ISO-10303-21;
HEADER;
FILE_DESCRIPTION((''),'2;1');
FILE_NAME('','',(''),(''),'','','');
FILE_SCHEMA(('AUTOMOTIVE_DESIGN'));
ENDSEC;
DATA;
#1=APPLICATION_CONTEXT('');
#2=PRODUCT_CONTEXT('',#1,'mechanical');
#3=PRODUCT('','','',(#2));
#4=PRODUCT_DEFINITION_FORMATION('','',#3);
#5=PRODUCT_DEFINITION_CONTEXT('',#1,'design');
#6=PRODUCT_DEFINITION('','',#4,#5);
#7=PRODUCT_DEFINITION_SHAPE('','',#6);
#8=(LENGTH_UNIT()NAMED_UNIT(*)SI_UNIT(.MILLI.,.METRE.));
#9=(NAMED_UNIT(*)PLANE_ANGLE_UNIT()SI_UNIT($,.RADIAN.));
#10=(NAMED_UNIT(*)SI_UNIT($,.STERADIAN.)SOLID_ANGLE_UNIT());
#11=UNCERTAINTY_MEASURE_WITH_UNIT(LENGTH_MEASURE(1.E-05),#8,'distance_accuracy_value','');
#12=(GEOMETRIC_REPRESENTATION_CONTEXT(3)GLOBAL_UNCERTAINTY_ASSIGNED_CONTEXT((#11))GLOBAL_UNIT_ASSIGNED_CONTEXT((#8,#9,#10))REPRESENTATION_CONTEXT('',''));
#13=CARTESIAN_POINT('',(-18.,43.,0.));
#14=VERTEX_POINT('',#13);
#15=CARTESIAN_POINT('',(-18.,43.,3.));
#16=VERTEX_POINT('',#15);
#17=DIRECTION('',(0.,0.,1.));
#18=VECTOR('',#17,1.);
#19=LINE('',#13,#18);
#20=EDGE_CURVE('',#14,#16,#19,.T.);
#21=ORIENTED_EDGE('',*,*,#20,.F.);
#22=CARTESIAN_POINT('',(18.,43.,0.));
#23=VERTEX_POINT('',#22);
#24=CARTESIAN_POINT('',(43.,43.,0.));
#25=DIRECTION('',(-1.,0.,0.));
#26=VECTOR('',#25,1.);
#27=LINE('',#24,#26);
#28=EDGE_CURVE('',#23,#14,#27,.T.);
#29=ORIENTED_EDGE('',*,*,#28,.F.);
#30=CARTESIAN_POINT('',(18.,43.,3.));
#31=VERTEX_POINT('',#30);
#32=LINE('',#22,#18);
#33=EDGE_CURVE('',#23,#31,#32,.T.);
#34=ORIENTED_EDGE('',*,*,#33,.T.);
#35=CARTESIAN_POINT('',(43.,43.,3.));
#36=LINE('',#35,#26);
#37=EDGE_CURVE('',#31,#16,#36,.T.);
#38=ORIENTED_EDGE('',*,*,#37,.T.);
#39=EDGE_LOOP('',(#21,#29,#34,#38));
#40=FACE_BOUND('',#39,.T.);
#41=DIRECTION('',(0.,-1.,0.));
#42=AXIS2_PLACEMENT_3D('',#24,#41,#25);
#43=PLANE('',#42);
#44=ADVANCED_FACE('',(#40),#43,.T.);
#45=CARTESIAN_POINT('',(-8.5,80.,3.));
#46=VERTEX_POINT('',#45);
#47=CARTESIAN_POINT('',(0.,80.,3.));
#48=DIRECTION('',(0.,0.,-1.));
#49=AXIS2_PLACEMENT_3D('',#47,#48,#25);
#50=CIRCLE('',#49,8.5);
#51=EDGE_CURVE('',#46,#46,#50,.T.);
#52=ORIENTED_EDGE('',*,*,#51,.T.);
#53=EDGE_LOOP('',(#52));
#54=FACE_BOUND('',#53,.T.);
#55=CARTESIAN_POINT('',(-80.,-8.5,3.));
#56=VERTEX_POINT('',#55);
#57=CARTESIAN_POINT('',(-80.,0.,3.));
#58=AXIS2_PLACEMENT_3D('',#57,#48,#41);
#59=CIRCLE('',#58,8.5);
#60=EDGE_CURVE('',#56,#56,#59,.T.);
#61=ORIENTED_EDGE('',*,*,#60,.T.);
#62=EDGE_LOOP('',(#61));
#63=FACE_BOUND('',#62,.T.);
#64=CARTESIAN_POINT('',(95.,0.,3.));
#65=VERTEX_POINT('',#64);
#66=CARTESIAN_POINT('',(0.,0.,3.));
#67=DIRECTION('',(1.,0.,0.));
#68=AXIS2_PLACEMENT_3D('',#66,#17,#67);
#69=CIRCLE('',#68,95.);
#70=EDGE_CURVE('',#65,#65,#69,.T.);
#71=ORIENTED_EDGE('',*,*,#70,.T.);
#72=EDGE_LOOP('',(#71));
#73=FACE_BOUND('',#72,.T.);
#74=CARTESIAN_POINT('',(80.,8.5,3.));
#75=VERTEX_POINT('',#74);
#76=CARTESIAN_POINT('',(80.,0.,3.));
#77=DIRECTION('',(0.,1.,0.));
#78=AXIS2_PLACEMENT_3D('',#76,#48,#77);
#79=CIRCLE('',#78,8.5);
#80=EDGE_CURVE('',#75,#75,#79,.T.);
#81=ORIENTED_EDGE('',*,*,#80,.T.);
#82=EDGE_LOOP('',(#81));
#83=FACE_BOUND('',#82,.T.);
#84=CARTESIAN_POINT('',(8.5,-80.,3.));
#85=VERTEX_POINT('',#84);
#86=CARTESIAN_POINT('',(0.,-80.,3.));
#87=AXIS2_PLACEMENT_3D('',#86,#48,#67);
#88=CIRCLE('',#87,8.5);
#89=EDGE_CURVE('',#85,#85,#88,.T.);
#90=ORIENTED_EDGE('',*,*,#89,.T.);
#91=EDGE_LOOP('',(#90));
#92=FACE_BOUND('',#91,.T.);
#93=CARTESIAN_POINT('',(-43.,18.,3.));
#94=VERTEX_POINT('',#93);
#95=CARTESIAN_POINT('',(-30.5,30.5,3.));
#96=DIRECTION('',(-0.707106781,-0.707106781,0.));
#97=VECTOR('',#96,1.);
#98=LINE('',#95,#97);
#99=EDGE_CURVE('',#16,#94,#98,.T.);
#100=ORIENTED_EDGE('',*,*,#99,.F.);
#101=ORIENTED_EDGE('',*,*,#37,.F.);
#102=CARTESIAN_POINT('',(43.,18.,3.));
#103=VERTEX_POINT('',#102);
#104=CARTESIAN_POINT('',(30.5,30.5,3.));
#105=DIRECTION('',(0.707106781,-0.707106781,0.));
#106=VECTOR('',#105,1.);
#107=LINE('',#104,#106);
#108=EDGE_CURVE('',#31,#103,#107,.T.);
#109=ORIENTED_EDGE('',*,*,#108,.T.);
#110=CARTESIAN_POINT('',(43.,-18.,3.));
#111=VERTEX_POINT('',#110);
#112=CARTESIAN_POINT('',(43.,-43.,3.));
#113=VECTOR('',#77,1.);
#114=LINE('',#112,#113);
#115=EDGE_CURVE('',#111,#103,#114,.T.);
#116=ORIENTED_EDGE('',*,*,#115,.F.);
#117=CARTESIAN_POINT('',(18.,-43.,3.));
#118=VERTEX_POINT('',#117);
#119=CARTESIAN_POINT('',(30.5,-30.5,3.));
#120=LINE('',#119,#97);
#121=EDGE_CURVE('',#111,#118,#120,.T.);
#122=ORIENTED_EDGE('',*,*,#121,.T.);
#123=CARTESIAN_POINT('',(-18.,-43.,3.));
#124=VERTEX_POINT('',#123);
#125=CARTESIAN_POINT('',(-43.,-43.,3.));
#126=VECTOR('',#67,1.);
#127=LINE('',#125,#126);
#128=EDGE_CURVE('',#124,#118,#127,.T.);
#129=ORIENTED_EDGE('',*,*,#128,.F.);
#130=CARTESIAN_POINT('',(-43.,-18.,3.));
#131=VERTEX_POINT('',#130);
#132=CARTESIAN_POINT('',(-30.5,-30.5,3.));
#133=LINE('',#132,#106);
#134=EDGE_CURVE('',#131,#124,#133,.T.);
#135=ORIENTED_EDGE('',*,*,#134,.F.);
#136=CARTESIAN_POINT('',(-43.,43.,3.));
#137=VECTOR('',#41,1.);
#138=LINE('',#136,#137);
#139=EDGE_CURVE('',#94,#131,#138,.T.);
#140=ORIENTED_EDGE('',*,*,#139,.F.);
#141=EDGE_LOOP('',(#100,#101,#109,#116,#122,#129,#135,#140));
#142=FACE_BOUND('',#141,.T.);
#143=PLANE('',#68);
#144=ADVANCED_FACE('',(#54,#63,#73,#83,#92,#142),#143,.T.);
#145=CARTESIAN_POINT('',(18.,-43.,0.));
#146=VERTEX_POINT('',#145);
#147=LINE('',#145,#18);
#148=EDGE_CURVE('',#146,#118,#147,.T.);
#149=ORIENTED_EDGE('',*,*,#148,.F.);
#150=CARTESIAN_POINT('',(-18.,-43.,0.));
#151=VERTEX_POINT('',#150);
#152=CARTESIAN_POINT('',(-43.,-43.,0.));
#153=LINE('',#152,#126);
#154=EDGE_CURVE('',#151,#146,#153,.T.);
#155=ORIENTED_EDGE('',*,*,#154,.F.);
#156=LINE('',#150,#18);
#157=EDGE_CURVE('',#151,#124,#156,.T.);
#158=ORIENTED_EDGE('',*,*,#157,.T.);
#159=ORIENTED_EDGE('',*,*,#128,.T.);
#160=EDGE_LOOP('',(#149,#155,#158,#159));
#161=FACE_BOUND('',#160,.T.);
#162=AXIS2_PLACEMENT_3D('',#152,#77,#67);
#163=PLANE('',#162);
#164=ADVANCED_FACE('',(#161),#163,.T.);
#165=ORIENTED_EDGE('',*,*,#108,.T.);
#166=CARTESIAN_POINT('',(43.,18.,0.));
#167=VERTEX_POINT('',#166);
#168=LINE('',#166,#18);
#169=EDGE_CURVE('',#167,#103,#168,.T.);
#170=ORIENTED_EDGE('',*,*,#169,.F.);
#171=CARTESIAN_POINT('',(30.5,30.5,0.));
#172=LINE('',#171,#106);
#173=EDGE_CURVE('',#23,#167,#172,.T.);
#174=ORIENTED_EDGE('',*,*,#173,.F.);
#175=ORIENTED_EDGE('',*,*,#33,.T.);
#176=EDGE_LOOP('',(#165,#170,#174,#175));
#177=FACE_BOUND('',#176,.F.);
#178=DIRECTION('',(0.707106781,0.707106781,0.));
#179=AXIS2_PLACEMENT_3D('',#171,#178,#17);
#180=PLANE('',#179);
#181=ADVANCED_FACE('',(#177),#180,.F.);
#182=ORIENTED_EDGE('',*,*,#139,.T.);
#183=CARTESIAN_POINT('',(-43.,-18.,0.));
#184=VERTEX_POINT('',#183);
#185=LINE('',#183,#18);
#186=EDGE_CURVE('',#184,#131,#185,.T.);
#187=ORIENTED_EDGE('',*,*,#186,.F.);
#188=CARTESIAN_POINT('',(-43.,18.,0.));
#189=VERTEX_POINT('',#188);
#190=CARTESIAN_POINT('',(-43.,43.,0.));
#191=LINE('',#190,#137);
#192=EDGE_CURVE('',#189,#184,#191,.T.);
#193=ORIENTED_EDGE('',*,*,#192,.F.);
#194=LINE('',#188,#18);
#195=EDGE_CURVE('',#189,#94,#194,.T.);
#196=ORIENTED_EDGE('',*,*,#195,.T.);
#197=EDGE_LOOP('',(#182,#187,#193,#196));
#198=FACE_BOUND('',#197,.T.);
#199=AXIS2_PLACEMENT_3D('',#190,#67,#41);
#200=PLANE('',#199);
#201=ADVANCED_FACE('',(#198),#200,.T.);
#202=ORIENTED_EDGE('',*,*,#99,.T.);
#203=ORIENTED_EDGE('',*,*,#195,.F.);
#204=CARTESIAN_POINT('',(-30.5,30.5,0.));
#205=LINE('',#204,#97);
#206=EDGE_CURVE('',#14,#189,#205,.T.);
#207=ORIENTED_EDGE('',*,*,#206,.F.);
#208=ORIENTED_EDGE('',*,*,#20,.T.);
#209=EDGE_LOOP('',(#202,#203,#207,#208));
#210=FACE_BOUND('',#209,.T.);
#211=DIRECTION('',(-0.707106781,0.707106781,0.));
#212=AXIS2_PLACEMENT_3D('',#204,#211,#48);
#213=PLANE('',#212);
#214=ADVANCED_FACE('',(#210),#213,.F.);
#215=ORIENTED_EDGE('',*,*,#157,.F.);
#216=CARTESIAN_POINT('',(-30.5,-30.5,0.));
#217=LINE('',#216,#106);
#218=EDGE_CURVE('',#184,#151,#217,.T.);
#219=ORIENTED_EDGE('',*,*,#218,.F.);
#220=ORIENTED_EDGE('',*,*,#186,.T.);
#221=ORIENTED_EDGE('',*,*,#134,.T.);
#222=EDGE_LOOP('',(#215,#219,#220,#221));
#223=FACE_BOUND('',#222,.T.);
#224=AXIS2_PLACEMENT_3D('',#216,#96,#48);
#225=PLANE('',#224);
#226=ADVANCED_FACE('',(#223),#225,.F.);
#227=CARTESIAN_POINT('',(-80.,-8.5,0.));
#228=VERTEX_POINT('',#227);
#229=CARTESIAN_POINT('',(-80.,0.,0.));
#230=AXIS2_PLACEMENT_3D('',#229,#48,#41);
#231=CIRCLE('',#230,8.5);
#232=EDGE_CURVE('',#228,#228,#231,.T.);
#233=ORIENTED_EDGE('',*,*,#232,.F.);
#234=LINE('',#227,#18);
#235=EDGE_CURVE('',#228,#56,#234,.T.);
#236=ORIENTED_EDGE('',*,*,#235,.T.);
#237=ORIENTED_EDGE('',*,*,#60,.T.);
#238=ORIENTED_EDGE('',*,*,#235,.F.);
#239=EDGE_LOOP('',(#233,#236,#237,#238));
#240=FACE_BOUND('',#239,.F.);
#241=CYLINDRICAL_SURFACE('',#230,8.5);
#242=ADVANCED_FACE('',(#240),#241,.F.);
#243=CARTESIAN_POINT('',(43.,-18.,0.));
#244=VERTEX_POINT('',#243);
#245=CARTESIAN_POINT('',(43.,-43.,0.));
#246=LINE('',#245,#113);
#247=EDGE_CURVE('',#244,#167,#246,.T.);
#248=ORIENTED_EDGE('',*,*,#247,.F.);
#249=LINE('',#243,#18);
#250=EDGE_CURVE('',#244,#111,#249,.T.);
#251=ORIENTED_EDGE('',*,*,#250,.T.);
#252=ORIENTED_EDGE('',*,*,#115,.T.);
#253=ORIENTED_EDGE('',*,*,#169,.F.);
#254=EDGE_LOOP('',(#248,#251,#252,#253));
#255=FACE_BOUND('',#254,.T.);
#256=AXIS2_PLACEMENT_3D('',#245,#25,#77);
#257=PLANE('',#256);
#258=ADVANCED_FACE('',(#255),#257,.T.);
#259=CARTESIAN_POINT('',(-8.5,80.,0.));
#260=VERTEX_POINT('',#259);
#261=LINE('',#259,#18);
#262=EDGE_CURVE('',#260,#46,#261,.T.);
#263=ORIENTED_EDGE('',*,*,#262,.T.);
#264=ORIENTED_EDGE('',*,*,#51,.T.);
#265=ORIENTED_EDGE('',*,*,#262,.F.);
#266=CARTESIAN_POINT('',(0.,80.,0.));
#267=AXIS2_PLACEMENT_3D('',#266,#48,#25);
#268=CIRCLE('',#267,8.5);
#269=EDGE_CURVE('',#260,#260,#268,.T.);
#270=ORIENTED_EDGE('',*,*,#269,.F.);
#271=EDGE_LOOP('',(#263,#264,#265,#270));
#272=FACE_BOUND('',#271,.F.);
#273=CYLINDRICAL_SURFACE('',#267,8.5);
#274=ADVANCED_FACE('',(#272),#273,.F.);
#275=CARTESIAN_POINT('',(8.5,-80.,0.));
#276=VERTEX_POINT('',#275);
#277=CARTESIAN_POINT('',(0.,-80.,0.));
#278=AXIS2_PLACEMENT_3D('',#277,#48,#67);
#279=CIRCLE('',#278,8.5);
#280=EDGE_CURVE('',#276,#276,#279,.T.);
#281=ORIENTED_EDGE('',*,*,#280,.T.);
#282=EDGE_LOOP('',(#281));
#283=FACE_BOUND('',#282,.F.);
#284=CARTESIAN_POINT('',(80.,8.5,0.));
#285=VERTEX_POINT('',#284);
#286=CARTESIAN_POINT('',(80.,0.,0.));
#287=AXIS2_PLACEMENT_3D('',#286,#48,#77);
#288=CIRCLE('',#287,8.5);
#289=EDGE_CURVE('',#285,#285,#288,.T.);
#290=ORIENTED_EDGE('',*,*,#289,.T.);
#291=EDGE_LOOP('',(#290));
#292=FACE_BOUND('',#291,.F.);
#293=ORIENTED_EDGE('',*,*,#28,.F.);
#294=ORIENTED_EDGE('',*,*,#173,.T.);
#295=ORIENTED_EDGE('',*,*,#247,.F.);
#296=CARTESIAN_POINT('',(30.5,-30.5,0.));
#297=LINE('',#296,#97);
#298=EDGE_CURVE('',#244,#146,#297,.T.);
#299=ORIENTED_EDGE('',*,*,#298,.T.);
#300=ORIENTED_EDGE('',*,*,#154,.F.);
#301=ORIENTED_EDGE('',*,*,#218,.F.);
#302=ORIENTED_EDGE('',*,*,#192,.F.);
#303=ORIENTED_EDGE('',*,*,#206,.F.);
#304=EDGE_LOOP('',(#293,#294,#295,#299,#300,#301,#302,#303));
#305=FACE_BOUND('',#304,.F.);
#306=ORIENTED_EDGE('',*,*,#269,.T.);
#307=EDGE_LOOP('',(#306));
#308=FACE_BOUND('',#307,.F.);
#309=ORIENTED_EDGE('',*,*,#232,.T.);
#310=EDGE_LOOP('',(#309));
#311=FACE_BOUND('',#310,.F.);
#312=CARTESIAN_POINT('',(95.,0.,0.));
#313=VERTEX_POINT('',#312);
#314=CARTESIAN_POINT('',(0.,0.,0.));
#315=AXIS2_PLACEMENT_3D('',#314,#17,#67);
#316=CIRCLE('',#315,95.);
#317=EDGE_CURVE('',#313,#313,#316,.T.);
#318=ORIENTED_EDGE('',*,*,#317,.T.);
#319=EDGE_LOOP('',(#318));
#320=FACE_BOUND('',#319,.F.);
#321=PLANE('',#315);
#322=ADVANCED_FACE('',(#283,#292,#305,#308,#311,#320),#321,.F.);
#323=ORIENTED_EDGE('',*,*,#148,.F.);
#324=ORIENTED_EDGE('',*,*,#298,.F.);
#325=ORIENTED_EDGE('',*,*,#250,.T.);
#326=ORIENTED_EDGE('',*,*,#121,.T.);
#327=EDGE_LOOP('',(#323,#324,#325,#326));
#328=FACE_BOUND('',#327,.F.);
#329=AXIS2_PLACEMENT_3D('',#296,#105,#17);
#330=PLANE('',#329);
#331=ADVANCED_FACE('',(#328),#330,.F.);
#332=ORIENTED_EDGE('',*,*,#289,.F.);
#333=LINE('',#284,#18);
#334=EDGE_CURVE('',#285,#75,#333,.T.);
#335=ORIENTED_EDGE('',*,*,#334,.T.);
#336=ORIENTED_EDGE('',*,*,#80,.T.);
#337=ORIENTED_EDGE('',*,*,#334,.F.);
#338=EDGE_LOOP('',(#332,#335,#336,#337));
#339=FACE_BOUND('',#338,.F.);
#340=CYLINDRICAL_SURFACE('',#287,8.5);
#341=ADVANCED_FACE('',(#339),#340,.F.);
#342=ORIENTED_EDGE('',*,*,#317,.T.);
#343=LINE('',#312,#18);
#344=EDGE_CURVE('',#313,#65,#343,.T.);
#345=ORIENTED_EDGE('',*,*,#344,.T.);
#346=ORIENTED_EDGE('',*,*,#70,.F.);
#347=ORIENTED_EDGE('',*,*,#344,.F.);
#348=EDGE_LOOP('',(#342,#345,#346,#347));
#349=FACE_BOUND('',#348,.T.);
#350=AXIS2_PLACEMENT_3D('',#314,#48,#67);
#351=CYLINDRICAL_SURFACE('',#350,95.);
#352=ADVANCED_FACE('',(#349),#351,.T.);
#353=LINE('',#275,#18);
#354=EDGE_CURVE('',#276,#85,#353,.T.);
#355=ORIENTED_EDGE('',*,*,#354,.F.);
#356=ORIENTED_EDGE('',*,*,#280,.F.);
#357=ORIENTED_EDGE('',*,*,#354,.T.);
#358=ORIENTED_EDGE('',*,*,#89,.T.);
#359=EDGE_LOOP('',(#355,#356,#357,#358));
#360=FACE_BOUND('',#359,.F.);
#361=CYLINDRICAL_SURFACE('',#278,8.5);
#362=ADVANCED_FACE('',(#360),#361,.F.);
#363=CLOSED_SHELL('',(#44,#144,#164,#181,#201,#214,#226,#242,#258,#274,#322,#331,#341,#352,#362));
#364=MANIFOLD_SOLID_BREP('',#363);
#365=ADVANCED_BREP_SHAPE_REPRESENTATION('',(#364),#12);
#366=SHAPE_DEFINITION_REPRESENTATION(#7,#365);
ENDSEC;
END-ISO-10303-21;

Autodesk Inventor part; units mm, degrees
ref_plane "YZ Plane" through (0, 0, 0) normal (1, 0, 0) x (0, 1, 0)
ref_plane "XZ Plane" through (0, 0, 0) normal (0, 1, 0) x (-1, 0, 0)
ref_plane "XY Plane" through (0, 0, 0) normal (0, 0, 1) x (1, 0, 0)
sketch "Sketch1" plane through (0, 0, 0) normal (0, 0, 1) x (1, 0, 0)
  circle A0 centre (0, 0) radius 95
  line L0 (43, 43) -> (-43, 43)
  line L1 (-43, 43) -> (-43, -43)
  line L2 (-43, -43) -> (43, -43)
  line L3 (43, -43) -> (43, 43)
  line L4 (43, 43) -> (-43, -43) construction
  line L5 (-43, 43) -> (43, -43) construction
  dimension "d157" = 190
  dimension "d158" = 86
  dimension "d159" = 86
extrude "Plate5" add sketch "Sketch1" along normal blind 3
sketch "Sketch7" plane through (0, 0, 0) normal (0, 0, -1) x (-1, 0, 0)
  circle A0 centre (0, 80) radius 8.5
  point P0 (0, 0)
  dimension "d160" = 17
  dimension "d161" = 80
extrude "Cut1" cut sketch "Sketch7" against normal blind 3
pattern_circular "Circular Pattern1" count 4 over 360 about axis through (0, 0, -10) along (0, 0, 1) of "Cut1"
chamfer "Corner Chamfer2" distance 25 angle 45 4 edges at (-43, -43, 1.5) (43, -43, 1.5) (-43, 43, 1.5) (43, 43, 1.5)
properties part number "TZS 0972 funnel FLANGE 50-90" material "Stainless Steel"
